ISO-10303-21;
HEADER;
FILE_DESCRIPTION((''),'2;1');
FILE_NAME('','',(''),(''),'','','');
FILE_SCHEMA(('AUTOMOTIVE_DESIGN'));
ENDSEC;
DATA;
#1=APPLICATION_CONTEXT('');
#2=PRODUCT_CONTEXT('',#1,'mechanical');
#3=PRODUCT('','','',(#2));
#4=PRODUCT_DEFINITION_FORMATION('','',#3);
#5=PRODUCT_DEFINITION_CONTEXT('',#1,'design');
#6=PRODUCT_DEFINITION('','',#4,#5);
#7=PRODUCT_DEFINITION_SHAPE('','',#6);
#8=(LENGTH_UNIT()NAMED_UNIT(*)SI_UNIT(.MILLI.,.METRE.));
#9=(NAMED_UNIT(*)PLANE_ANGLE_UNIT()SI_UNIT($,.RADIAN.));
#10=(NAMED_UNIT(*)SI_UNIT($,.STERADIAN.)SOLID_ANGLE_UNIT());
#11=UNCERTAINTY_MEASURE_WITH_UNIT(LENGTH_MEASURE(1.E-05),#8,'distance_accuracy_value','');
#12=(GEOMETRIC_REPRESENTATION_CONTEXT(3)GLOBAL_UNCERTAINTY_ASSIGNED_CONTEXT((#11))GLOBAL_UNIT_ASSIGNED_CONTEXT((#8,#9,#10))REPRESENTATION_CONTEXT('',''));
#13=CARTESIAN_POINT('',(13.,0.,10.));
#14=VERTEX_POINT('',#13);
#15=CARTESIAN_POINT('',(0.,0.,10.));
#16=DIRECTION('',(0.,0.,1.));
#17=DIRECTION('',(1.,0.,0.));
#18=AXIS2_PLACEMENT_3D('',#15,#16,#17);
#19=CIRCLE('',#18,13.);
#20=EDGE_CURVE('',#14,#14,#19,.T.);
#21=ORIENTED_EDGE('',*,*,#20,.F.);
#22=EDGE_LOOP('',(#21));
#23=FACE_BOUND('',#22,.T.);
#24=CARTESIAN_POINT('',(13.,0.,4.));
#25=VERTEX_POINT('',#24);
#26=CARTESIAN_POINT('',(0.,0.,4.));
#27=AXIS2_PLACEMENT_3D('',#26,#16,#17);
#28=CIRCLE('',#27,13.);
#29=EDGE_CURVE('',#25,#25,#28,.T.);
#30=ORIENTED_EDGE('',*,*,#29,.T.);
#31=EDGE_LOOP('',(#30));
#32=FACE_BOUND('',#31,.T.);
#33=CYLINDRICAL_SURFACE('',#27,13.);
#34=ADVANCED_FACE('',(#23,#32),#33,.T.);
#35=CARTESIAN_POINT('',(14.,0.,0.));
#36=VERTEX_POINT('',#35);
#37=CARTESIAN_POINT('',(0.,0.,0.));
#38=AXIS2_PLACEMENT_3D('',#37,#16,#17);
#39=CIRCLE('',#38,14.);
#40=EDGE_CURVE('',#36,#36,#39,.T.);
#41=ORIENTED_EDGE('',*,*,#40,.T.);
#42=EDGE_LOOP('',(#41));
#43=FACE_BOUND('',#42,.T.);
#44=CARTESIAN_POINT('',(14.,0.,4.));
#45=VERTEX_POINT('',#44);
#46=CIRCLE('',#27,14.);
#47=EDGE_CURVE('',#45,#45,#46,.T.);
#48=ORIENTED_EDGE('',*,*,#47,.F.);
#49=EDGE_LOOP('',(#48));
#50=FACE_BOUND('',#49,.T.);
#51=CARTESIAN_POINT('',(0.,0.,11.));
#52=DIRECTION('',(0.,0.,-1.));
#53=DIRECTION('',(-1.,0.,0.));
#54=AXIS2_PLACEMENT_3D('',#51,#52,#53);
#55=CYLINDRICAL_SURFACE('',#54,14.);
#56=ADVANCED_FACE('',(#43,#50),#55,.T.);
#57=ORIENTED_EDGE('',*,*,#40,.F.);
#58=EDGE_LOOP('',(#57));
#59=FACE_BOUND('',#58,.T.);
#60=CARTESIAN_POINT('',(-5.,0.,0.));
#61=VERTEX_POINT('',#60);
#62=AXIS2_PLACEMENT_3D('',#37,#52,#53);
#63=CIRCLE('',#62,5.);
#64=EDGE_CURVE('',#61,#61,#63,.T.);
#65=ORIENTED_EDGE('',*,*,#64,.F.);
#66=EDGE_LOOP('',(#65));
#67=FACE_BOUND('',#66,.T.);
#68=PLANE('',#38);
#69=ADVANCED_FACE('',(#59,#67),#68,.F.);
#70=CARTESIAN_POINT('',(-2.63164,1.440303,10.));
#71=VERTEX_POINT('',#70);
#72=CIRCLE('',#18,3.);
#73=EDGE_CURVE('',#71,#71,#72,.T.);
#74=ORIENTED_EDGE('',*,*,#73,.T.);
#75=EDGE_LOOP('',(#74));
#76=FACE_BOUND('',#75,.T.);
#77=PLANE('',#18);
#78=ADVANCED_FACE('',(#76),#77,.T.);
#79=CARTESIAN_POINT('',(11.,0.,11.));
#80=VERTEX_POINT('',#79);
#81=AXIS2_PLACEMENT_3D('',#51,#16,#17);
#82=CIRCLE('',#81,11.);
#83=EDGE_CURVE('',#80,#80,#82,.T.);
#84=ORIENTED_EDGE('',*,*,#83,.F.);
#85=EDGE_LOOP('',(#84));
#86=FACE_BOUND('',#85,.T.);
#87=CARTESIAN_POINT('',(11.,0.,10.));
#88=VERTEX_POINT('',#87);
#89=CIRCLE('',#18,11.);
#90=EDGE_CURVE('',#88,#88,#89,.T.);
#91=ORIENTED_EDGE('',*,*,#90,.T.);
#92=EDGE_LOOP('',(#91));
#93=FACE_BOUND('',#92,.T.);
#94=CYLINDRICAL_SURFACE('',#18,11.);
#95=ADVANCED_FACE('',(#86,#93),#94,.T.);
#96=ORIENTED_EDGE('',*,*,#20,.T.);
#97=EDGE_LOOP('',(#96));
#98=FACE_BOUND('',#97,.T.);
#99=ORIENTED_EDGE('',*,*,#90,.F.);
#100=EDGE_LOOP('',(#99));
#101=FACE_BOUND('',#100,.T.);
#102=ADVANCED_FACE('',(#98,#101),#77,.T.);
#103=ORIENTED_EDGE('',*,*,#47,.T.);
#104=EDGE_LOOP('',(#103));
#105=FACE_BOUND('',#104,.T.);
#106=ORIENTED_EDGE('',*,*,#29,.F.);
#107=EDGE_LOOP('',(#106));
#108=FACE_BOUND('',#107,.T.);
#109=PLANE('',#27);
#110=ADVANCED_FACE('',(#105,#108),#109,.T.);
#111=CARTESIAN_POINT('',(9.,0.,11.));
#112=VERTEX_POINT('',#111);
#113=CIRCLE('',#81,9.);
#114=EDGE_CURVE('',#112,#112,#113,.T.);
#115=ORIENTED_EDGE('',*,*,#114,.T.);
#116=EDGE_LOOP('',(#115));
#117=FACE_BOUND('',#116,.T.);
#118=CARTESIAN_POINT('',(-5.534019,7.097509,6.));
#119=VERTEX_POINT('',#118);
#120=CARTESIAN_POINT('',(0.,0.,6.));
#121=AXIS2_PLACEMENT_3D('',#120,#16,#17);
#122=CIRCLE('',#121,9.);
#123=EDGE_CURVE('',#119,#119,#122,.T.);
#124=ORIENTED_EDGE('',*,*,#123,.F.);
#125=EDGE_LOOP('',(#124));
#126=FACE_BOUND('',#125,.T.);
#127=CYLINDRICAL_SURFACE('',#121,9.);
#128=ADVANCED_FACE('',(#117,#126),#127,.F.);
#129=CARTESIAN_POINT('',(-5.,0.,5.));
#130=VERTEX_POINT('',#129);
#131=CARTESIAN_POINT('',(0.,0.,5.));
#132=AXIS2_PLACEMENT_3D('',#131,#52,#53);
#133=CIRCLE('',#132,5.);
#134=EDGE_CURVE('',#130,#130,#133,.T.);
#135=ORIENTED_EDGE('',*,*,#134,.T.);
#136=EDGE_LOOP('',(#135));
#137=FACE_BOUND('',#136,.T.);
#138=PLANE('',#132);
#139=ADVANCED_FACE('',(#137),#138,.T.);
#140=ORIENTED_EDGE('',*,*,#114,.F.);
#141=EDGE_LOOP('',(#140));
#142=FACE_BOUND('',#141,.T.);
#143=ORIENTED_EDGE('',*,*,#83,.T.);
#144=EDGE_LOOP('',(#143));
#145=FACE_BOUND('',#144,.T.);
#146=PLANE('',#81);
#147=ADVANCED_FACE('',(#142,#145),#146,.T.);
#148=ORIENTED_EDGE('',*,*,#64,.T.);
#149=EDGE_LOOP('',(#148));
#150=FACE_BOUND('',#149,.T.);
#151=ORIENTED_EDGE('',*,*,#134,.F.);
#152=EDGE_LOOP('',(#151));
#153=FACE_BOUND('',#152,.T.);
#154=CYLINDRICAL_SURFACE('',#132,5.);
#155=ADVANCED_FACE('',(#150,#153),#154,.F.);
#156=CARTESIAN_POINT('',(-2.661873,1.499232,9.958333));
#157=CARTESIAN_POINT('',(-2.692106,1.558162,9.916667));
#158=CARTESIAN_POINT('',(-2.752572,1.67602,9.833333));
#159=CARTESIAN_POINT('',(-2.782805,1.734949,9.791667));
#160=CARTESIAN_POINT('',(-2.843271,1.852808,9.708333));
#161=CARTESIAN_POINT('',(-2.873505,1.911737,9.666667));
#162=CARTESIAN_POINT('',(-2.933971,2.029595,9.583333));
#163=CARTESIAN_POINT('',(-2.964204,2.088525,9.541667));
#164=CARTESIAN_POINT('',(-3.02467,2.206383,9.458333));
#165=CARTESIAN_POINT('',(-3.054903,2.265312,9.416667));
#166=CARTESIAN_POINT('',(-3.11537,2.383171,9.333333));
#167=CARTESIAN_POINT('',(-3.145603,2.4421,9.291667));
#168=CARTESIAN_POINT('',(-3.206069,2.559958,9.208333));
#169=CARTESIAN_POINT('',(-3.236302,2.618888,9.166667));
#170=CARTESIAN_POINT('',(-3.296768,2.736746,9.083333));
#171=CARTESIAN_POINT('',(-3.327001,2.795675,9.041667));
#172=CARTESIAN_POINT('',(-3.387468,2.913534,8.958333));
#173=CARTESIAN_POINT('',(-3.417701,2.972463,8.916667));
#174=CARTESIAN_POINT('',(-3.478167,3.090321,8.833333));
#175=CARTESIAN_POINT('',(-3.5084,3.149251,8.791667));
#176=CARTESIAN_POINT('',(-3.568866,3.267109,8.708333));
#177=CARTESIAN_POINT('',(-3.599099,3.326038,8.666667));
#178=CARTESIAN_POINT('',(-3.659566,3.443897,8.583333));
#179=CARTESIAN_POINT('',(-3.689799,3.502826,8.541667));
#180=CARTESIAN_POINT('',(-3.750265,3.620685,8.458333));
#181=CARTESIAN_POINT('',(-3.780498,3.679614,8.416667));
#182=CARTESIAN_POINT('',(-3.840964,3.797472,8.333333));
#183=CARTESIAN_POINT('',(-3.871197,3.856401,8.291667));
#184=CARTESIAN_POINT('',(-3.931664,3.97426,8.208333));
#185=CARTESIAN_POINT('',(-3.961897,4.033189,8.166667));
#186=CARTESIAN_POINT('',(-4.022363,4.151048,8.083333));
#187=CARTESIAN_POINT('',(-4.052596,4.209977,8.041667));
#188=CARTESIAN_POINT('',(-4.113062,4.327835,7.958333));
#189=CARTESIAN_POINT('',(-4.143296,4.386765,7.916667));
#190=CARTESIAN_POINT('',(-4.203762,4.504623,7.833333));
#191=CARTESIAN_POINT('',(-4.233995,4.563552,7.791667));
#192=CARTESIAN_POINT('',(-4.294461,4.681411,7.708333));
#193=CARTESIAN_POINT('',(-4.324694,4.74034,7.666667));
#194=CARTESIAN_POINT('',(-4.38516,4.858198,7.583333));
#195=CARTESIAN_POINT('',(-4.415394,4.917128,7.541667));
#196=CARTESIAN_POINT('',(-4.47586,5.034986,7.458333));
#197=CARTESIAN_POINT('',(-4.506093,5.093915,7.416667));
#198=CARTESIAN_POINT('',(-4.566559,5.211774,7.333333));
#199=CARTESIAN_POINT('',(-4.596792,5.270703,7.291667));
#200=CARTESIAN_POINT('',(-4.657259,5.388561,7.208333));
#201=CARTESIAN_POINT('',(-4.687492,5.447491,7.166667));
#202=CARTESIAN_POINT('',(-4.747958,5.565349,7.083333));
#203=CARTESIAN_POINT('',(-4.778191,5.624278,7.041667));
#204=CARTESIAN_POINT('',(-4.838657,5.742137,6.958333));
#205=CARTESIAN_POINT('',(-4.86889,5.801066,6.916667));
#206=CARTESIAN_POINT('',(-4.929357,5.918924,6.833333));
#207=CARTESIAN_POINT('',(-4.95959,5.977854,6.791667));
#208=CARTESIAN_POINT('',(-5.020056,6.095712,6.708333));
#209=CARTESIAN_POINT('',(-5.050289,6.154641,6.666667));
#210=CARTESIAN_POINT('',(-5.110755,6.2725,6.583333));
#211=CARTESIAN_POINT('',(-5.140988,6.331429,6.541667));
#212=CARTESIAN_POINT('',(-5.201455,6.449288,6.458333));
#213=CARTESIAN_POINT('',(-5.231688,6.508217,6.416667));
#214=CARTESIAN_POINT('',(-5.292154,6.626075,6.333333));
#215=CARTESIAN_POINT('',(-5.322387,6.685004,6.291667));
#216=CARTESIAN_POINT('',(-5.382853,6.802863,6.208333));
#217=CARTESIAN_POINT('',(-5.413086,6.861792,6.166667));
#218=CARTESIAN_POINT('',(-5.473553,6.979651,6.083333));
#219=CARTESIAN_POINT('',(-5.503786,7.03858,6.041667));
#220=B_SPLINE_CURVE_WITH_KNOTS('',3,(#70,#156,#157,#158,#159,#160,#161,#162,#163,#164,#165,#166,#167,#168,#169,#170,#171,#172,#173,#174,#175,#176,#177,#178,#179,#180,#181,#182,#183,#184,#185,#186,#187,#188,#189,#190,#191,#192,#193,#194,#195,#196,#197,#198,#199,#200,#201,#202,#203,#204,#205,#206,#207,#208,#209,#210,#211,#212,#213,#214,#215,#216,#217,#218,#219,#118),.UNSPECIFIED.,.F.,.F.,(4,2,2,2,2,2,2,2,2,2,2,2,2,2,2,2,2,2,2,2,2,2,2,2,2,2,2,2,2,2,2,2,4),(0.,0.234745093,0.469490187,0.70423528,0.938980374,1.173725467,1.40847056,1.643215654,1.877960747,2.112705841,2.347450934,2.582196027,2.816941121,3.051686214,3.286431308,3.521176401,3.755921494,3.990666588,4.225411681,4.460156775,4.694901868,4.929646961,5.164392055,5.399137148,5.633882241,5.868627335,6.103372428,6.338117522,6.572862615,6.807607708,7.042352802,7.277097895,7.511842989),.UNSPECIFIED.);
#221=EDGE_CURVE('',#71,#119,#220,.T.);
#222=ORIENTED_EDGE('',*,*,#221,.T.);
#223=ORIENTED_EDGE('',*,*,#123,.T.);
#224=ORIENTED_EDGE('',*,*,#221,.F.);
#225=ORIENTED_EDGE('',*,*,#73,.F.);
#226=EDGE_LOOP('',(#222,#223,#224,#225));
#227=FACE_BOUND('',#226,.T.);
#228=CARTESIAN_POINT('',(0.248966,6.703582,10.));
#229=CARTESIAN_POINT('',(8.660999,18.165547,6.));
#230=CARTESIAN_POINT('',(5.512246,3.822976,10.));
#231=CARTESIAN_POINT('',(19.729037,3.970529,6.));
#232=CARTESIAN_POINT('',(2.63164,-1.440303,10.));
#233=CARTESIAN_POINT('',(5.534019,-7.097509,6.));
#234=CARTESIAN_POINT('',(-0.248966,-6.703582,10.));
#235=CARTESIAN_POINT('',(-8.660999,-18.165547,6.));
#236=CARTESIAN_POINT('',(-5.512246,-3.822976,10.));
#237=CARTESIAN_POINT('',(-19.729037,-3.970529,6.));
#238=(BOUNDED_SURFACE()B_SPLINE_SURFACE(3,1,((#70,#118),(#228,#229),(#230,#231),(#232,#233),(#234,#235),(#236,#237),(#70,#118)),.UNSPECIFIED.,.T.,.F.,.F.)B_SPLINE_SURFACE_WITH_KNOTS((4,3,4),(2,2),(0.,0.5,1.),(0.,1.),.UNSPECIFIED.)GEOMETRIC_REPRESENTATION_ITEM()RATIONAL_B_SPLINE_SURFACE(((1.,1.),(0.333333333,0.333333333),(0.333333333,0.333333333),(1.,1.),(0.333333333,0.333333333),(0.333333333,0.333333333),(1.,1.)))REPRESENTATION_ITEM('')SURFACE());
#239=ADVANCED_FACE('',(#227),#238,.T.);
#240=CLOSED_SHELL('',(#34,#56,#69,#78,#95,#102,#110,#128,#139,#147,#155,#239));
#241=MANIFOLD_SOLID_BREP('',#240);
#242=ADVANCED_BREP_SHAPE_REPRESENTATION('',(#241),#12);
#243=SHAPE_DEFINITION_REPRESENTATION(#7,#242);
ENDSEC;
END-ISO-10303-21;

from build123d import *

# Parameters (mm, degrees)
SKETCH1_R           = 14
BOSS_EXTRUDE1_DEPTH = 11
CUT_EXTRUDE1_START  = -7
SKETCH2_R           = 14
SKETCH2_R_2         = 13
CUT_EXTRUDE1_DEPTH  = 7
CUT_EXTRUDE2_START  = -1
SKETCH3_R           = 13
SKETCH3_R_2         = 11
CUT_EXTRUDE2_DEPTH  = 1
SKETCH4_R           = 9
CUT_EXTRUDE3_DEPTH  = 5
SKETCH5_R           = 5
CUT_EXTRUDE4_DEPTH  = 5


with BuildPart() as part:
    # Sketch1 → Boss-Extrude1 (new body)
    with BuildSketch(Plane.XY):
        Circle(SKETCH1_R)
    extrude(amount=BOSS_EXTRUDE1_DEPTH)

    # Sketch2 → Cut-Extrude1 (cut)
    with BuildSketch(Plane.XY.offset(11).offset(CUT_EXTRUDE1_START)):
        Circle(SKETCH2_R)
        Circle(SKETCH2_R_2, mode=Mode.SUBTRACT)
    extrude(amount=CUT_EXTRUDE1_DEPTH, mode=Mode.SUBTRACT)

    # Sketch3 → Cut-Extrude2 (cut)
    with BuildSketch(Plane.XY.offset(11).offset(CUT_EXTRUDE2_START)):
        Circle(SKETCH3_R)
        Circle(SKETCH3_R_2, mode=Mode.SUBTRACT)
    extrude(amount=CUT_EXTRUDE2_DEPTH, mode=Mode.SUBTRACT)

    # Sketch4 → Cut-Extrude3 (cut)
    with BuildSketch(Plane.XY.offset(11)):
        Circle(SKETCH4_R)
    extrude(amount=-CUT_EXTRUDE3_DEPTH, mode=Mode.SUBTRACT)

    # Sketch5 → Cut-Extrude4 (cut)
    with BuildSketch(Plane(origin=(0, 0, 0), x_dir=(-1, 0, 0), z_dir=(0, 0, -1))):
        Circle(SKETCH5_R)
    extrude(amount=-CUT_EXTRUDE4_DEPTH, mode=Mode.SUBTRACT)

    # Loft1: read off the stored shape, not the designer's step
    # Loft1: loft between two sections, ruled curve by curve
    loft1_from = [
        Edge.make_bspline([(-2.631639621, 1.44030306, 10), (0.248966499, 6.703582302, 10), (5.512245741, 3.822976182, 10), (2.631639621, -1.44030306, 10), (-0.248966499, -6.703582302, 10), (-5.512245741, -3.822976182, 10), (-2.631639621, 1.44030306, 10)], [0, 0, 0, 0, 0.5, 0.5, 0.5, 1, 1, 1, 1], 3, [1, 0.333333333, 0.333333333, 1, 0.333333333, 0.333333333, 1]),
    ]
    loft1_to = [
        Edge.make_bspline([(-5.534018928, 7.097509035, 6), (8.660999143, 18.165546891, 6), (19.729036998, 3.97052882, 6), (5.534018928, -7.097509035, 6), (-8.660999143, -18.165546891, 6), (-19.729036998, -3.97052882, 6), (-5.534018928, 7.097509035, 6)], [0, 0, 0, 0, 0.5, 0.5, 0.5, 1, 1, 1, 1], 3, [1, 0.333333333, 0.333333333, 1, 0.333333333, 0.333333333, 1]),
    ]
    loft1 = Solid(Shell([*[Face.make_surface_from_curves(loft1_from[k], loft1_to[k]) for k in range(1)], Face(Wire(loft1_from)), Face(Wire(loft1_to))]))
    add(loft1)


solid = part.part
